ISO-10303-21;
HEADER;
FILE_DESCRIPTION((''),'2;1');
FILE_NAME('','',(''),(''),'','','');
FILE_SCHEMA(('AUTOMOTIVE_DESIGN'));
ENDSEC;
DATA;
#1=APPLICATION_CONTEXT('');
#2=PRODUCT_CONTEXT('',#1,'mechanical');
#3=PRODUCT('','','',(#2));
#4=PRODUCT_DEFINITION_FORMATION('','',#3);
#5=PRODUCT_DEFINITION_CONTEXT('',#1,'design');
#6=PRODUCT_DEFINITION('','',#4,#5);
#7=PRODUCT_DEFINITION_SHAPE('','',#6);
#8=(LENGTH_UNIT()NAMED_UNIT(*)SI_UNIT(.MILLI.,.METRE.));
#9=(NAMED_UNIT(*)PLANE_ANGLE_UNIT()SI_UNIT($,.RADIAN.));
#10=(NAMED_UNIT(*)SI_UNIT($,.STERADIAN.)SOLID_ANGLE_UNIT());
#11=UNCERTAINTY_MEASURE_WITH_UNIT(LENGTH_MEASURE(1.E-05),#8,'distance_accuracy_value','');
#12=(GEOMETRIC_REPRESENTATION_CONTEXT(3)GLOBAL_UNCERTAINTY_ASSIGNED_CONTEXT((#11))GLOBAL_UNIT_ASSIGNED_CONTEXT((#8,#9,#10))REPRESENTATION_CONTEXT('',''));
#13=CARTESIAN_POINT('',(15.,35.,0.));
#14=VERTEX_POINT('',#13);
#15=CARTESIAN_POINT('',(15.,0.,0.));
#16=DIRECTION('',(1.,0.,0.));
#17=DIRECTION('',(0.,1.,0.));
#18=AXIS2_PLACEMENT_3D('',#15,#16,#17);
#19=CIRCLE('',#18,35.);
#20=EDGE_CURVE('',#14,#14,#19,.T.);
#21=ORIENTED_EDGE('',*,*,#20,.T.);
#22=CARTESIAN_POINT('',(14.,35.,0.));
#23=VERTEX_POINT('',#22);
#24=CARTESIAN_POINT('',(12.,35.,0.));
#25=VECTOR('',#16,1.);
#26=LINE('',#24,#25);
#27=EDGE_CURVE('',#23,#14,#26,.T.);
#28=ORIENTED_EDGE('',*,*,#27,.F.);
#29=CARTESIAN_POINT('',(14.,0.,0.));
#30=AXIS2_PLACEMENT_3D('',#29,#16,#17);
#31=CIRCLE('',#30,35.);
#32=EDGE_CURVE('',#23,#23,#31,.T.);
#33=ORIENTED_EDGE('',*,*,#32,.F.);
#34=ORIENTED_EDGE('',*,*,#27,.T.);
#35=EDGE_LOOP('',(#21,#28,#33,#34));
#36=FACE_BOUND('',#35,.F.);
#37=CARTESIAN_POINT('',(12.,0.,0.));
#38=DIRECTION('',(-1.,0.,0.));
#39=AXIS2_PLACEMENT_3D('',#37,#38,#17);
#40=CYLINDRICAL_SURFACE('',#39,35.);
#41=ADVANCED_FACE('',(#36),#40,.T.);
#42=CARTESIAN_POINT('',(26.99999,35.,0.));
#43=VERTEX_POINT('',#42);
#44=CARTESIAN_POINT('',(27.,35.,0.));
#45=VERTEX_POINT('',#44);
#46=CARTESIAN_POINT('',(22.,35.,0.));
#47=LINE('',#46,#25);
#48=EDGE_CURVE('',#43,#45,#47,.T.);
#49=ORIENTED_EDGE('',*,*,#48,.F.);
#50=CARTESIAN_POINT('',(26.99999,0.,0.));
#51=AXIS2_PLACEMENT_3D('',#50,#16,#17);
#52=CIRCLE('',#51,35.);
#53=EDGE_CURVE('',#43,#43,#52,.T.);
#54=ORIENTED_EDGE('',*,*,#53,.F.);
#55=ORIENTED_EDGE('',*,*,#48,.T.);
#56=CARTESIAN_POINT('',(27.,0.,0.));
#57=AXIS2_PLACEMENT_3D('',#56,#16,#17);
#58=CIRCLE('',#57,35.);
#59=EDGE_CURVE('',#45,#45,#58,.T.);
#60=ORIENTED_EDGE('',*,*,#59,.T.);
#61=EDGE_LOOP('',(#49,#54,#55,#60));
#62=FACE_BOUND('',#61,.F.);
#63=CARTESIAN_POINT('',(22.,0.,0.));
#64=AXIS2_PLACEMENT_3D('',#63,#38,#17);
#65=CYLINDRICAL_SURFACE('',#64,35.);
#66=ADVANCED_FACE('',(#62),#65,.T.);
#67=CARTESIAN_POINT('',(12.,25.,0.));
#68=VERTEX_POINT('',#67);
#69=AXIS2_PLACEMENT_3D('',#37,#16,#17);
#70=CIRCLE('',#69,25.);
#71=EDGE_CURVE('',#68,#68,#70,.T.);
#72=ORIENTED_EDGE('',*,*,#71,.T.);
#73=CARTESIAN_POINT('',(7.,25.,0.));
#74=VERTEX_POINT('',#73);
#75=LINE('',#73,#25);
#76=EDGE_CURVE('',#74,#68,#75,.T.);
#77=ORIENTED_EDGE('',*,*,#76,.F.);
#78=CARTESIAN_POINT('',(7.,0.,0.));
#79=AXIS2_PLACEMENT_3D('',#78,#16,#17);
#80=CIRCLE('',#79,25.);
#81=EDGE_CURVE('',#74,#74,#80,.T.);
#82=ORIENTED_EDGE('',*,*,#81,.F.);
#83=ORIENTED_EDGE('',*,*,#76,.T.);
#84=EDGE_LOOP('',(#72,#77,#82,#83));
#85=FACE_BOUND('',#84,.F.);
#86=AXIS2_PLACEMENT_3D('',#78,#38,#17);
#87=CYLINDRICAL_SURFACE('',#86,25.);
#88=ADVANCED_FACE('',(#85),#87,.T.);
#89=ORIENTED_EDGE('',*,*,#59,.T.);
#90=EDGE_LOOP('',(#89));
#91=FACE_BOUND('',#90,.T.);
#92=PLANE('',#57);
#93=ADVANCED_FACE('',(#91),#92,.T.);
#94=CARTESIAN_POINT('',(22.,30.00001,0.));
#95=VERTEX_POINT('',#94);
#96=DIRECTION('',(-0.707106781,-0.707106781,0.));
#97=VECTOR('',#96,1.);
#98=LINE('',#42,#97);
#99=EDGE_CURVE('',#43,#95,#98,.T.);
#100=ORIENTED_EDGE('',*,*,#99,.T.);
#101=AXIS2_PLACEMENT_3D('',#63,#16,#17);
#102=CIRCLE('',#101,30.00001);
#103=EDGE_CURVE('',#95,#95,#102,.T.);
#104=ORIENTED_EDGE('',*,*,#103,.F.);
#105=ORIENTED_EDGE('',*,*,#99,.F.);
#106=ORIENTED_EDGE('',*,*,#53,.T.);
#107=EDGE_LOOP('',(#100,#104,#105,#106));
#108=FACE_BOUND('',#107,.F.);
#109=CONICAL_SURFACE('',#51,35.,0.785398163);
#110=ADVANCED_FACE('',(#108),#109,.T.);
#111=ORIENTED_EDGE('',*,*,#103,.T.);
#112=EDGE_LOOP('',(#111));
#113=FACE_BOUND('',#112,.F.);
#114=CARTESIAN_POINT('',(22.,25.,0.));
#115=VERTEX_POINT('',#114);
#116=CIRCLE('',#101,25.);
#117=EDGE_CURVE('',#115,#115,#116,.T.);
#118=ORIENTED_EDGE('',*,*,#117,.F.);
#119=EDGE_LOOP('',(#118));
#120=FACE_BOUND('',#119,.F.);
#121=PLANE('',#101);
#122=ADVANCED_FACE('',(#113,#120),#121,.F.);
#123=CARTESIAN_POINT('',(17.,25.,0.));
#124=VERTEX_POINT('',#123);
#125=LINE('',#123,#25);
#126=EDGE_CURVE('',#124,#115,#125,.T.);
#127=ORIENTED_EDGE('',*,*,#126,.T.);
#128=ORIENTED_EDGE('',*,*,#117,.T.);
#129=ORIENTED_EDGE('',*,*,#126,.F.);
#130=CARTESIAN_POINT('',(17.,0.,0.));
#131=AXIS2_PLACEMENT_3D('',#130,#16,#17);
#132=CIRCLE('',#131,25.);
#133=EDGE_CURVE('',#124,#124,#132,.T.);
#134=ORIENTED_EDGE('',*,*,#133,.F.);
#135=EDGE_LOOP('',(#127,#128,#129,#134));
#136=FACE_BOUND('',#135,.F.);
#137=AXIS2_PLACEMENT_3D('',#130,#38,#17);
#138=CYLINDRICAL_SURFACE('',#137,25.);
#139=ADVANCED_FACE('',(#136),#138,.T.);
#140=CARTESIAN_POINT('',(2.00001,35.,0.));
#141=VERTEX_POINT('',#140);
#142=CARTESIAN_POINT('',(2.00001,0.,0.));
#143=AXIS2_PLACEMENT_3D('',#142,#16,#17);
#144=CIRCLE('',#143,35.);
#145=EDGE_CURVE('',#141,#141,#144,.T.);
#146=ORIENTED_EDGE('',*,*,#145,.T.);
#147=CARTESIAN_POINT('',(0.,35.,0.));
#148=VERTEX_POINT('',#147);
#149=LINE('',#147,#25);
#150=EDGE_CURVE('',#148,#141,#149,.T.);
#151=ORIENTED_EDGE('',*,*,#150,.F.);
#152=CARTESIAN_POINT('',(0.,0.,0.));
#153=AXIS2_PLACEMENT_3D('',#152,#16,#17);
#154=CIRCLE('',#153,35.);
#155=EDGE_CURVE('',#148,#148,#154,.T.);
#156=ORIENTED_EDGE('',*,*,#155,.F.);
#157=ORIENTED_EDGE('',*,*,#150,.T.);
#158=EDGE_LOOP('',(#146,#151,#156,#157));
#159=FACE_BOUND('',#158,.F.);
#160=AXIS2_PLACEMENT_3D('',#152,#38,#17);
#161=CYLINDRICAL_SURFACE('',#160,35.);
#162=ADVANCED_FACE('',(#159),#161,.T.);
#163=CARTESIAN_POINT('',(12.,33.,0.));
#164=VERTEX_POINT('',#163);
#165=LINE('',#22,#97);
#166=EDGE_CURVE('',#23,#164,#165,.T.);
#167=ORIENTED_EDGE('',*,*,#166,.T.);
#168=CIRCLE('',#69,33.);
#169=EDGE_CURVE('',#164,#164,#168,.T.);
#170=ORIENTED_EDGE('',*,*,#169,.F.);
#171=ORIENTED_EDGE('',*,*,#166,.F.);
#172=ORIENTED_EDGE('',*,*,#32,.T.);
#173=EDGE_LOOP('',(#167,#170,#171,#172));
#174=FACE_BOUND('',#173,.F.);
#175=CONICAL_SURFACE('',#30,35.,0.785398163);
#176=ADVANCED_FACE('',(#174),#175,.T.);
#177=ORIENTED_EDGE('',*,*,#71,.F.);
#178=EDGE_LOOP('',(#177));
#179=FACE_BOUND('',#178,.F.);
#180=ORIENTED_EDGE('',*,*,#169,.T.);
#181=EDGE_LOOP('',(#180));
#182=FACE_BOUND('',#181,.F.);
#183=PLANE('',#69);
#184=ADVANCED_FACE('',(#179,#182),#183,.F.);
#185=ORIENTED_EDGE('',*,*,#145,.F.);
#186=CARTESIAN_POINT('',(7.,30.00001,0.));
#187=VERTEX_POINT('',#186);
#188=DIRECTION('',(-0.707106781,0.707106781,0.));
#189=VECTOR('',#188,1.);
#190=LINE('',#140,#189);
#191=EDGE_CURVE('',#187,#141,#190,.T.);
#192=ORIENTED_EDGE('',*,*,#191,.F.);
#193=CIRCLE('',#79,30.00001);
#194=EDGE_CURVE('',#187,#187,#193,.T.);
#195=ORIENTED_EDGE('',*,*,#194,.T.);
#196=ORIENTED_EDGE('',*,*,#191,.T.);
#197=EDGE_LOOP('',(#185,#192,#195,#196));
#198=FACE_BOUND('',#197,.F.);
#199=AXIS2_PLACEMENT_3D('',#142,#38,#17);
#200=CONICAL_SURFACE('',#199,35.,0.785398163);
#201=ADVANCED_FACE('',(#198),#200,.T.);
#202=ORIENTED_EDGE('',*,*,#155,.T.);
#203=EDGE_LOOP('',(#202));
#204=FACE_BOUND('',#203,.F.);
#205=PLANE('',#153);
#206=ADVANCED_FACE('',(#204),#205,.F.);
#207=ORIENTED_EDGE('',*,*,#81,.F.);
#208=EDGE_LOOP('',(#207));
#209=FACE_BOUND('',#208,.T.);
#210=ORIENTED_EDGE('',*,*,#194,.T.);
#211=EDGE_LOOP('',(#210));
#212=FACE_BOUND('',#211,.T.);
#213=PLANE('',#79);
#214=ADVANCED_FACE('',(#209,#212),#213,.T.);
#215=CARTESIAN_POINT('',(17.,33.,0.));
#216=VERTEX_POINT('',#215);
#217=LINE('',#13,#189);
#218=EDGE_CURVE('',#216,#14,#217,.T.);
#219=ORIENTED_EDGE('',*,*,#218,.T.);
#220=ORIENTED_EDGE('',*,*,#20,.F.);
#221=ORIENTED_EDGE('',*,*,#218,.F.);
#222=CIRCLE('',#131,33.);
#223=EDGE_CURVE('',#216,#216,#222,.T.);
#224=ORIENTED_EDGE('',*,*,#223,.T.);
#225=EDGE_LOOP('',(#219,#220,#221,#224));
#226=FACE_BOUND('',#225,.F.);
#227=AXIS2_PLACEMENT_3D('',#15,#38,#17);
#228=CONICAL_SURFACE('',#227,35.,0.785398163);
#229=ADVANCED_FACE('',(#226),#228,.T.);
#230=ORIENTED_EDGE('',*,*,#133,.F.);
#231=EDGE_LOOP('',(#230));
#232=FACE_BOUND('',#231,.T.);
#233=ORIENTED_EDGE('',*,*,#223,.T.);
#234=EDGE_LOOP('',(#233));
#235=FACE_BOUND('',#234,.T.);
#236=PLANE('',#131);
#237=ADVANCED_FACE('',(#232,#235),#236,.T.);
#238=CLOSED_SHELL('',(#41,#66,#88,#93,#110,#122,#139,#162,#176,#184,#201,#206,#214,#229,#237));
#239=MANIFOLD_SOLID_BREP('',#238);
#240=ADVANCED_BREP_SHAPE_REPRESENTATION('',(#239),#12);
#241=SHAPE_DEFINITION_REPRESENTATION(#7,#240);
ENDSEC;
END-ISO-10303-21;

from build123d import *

# Parameters (mm, degrees)
F0_R      = 35
F1_DEPTH  = 7
F2_R      = 25
F3_DEPTH  = 5
F5_R      = 35
F6_DEPTH  = 5
F7_R      = 25
F8_DEPTH  = 5
F9_R      = 35
F10_DEPTH = 5
F11_SIZE  = 4.99999
F12_SIZE  = 2


# Not quite as in the source:
# - a fillet or chamfer is up to 0.001 mm smaller than in the source, because OpenCascade refuses the exact size


with BuildPart() as f1:
    # F0 (on Right) → F1 (new body)
    with BuildSketch(Plane.YZ):
        Circle(F0_R)
    extrude(amount=F1_DEPTH)

    # F2 (on face) → F3 (join)
    with BuildSketch(Plane.YZ.offset(7)):
        Circle(F2_R)
    extrude(amount=F3_DEPTH)

    # F5 (on face) → F6 (join)
    with BuildSketch(Plane.YZ.offset(12)):
        Circle(F5_R)
    extrude(amount=F6_DEPTH)

    # F7 (on face) → F8 (join)
    with BuildSketch(Plane.YZ.offset(17)):
        Circle(F7_R)
    extrude(amount=F8_DEPTH)

    # F9 (on face) → F10 (join)
    with BuildSketch(Plane.YZ.offset(22)):
        Circle(F9_R)
    extrude(amount=F10_DEPTH)

    # F11 (size 5 in the source; OpenCascade refuses exactly that, so slightly less here)
    f11_edges = [f1.edges().sort_by_distance(p)[0] for p in [
        (7, -35, 0),
        (22, -35, 0),
    ]]
    chamfer(f11_edges, length=F11_SIZE)

    # F12
    f12_edges = [f1.edges().sort_by_distance(p)[0] for p in [
        (12, -35, 0),
        (17, -35, 0),
    ]]
    chamfer(f12_edges, length=F12_SIZE)


solid = f1.part
